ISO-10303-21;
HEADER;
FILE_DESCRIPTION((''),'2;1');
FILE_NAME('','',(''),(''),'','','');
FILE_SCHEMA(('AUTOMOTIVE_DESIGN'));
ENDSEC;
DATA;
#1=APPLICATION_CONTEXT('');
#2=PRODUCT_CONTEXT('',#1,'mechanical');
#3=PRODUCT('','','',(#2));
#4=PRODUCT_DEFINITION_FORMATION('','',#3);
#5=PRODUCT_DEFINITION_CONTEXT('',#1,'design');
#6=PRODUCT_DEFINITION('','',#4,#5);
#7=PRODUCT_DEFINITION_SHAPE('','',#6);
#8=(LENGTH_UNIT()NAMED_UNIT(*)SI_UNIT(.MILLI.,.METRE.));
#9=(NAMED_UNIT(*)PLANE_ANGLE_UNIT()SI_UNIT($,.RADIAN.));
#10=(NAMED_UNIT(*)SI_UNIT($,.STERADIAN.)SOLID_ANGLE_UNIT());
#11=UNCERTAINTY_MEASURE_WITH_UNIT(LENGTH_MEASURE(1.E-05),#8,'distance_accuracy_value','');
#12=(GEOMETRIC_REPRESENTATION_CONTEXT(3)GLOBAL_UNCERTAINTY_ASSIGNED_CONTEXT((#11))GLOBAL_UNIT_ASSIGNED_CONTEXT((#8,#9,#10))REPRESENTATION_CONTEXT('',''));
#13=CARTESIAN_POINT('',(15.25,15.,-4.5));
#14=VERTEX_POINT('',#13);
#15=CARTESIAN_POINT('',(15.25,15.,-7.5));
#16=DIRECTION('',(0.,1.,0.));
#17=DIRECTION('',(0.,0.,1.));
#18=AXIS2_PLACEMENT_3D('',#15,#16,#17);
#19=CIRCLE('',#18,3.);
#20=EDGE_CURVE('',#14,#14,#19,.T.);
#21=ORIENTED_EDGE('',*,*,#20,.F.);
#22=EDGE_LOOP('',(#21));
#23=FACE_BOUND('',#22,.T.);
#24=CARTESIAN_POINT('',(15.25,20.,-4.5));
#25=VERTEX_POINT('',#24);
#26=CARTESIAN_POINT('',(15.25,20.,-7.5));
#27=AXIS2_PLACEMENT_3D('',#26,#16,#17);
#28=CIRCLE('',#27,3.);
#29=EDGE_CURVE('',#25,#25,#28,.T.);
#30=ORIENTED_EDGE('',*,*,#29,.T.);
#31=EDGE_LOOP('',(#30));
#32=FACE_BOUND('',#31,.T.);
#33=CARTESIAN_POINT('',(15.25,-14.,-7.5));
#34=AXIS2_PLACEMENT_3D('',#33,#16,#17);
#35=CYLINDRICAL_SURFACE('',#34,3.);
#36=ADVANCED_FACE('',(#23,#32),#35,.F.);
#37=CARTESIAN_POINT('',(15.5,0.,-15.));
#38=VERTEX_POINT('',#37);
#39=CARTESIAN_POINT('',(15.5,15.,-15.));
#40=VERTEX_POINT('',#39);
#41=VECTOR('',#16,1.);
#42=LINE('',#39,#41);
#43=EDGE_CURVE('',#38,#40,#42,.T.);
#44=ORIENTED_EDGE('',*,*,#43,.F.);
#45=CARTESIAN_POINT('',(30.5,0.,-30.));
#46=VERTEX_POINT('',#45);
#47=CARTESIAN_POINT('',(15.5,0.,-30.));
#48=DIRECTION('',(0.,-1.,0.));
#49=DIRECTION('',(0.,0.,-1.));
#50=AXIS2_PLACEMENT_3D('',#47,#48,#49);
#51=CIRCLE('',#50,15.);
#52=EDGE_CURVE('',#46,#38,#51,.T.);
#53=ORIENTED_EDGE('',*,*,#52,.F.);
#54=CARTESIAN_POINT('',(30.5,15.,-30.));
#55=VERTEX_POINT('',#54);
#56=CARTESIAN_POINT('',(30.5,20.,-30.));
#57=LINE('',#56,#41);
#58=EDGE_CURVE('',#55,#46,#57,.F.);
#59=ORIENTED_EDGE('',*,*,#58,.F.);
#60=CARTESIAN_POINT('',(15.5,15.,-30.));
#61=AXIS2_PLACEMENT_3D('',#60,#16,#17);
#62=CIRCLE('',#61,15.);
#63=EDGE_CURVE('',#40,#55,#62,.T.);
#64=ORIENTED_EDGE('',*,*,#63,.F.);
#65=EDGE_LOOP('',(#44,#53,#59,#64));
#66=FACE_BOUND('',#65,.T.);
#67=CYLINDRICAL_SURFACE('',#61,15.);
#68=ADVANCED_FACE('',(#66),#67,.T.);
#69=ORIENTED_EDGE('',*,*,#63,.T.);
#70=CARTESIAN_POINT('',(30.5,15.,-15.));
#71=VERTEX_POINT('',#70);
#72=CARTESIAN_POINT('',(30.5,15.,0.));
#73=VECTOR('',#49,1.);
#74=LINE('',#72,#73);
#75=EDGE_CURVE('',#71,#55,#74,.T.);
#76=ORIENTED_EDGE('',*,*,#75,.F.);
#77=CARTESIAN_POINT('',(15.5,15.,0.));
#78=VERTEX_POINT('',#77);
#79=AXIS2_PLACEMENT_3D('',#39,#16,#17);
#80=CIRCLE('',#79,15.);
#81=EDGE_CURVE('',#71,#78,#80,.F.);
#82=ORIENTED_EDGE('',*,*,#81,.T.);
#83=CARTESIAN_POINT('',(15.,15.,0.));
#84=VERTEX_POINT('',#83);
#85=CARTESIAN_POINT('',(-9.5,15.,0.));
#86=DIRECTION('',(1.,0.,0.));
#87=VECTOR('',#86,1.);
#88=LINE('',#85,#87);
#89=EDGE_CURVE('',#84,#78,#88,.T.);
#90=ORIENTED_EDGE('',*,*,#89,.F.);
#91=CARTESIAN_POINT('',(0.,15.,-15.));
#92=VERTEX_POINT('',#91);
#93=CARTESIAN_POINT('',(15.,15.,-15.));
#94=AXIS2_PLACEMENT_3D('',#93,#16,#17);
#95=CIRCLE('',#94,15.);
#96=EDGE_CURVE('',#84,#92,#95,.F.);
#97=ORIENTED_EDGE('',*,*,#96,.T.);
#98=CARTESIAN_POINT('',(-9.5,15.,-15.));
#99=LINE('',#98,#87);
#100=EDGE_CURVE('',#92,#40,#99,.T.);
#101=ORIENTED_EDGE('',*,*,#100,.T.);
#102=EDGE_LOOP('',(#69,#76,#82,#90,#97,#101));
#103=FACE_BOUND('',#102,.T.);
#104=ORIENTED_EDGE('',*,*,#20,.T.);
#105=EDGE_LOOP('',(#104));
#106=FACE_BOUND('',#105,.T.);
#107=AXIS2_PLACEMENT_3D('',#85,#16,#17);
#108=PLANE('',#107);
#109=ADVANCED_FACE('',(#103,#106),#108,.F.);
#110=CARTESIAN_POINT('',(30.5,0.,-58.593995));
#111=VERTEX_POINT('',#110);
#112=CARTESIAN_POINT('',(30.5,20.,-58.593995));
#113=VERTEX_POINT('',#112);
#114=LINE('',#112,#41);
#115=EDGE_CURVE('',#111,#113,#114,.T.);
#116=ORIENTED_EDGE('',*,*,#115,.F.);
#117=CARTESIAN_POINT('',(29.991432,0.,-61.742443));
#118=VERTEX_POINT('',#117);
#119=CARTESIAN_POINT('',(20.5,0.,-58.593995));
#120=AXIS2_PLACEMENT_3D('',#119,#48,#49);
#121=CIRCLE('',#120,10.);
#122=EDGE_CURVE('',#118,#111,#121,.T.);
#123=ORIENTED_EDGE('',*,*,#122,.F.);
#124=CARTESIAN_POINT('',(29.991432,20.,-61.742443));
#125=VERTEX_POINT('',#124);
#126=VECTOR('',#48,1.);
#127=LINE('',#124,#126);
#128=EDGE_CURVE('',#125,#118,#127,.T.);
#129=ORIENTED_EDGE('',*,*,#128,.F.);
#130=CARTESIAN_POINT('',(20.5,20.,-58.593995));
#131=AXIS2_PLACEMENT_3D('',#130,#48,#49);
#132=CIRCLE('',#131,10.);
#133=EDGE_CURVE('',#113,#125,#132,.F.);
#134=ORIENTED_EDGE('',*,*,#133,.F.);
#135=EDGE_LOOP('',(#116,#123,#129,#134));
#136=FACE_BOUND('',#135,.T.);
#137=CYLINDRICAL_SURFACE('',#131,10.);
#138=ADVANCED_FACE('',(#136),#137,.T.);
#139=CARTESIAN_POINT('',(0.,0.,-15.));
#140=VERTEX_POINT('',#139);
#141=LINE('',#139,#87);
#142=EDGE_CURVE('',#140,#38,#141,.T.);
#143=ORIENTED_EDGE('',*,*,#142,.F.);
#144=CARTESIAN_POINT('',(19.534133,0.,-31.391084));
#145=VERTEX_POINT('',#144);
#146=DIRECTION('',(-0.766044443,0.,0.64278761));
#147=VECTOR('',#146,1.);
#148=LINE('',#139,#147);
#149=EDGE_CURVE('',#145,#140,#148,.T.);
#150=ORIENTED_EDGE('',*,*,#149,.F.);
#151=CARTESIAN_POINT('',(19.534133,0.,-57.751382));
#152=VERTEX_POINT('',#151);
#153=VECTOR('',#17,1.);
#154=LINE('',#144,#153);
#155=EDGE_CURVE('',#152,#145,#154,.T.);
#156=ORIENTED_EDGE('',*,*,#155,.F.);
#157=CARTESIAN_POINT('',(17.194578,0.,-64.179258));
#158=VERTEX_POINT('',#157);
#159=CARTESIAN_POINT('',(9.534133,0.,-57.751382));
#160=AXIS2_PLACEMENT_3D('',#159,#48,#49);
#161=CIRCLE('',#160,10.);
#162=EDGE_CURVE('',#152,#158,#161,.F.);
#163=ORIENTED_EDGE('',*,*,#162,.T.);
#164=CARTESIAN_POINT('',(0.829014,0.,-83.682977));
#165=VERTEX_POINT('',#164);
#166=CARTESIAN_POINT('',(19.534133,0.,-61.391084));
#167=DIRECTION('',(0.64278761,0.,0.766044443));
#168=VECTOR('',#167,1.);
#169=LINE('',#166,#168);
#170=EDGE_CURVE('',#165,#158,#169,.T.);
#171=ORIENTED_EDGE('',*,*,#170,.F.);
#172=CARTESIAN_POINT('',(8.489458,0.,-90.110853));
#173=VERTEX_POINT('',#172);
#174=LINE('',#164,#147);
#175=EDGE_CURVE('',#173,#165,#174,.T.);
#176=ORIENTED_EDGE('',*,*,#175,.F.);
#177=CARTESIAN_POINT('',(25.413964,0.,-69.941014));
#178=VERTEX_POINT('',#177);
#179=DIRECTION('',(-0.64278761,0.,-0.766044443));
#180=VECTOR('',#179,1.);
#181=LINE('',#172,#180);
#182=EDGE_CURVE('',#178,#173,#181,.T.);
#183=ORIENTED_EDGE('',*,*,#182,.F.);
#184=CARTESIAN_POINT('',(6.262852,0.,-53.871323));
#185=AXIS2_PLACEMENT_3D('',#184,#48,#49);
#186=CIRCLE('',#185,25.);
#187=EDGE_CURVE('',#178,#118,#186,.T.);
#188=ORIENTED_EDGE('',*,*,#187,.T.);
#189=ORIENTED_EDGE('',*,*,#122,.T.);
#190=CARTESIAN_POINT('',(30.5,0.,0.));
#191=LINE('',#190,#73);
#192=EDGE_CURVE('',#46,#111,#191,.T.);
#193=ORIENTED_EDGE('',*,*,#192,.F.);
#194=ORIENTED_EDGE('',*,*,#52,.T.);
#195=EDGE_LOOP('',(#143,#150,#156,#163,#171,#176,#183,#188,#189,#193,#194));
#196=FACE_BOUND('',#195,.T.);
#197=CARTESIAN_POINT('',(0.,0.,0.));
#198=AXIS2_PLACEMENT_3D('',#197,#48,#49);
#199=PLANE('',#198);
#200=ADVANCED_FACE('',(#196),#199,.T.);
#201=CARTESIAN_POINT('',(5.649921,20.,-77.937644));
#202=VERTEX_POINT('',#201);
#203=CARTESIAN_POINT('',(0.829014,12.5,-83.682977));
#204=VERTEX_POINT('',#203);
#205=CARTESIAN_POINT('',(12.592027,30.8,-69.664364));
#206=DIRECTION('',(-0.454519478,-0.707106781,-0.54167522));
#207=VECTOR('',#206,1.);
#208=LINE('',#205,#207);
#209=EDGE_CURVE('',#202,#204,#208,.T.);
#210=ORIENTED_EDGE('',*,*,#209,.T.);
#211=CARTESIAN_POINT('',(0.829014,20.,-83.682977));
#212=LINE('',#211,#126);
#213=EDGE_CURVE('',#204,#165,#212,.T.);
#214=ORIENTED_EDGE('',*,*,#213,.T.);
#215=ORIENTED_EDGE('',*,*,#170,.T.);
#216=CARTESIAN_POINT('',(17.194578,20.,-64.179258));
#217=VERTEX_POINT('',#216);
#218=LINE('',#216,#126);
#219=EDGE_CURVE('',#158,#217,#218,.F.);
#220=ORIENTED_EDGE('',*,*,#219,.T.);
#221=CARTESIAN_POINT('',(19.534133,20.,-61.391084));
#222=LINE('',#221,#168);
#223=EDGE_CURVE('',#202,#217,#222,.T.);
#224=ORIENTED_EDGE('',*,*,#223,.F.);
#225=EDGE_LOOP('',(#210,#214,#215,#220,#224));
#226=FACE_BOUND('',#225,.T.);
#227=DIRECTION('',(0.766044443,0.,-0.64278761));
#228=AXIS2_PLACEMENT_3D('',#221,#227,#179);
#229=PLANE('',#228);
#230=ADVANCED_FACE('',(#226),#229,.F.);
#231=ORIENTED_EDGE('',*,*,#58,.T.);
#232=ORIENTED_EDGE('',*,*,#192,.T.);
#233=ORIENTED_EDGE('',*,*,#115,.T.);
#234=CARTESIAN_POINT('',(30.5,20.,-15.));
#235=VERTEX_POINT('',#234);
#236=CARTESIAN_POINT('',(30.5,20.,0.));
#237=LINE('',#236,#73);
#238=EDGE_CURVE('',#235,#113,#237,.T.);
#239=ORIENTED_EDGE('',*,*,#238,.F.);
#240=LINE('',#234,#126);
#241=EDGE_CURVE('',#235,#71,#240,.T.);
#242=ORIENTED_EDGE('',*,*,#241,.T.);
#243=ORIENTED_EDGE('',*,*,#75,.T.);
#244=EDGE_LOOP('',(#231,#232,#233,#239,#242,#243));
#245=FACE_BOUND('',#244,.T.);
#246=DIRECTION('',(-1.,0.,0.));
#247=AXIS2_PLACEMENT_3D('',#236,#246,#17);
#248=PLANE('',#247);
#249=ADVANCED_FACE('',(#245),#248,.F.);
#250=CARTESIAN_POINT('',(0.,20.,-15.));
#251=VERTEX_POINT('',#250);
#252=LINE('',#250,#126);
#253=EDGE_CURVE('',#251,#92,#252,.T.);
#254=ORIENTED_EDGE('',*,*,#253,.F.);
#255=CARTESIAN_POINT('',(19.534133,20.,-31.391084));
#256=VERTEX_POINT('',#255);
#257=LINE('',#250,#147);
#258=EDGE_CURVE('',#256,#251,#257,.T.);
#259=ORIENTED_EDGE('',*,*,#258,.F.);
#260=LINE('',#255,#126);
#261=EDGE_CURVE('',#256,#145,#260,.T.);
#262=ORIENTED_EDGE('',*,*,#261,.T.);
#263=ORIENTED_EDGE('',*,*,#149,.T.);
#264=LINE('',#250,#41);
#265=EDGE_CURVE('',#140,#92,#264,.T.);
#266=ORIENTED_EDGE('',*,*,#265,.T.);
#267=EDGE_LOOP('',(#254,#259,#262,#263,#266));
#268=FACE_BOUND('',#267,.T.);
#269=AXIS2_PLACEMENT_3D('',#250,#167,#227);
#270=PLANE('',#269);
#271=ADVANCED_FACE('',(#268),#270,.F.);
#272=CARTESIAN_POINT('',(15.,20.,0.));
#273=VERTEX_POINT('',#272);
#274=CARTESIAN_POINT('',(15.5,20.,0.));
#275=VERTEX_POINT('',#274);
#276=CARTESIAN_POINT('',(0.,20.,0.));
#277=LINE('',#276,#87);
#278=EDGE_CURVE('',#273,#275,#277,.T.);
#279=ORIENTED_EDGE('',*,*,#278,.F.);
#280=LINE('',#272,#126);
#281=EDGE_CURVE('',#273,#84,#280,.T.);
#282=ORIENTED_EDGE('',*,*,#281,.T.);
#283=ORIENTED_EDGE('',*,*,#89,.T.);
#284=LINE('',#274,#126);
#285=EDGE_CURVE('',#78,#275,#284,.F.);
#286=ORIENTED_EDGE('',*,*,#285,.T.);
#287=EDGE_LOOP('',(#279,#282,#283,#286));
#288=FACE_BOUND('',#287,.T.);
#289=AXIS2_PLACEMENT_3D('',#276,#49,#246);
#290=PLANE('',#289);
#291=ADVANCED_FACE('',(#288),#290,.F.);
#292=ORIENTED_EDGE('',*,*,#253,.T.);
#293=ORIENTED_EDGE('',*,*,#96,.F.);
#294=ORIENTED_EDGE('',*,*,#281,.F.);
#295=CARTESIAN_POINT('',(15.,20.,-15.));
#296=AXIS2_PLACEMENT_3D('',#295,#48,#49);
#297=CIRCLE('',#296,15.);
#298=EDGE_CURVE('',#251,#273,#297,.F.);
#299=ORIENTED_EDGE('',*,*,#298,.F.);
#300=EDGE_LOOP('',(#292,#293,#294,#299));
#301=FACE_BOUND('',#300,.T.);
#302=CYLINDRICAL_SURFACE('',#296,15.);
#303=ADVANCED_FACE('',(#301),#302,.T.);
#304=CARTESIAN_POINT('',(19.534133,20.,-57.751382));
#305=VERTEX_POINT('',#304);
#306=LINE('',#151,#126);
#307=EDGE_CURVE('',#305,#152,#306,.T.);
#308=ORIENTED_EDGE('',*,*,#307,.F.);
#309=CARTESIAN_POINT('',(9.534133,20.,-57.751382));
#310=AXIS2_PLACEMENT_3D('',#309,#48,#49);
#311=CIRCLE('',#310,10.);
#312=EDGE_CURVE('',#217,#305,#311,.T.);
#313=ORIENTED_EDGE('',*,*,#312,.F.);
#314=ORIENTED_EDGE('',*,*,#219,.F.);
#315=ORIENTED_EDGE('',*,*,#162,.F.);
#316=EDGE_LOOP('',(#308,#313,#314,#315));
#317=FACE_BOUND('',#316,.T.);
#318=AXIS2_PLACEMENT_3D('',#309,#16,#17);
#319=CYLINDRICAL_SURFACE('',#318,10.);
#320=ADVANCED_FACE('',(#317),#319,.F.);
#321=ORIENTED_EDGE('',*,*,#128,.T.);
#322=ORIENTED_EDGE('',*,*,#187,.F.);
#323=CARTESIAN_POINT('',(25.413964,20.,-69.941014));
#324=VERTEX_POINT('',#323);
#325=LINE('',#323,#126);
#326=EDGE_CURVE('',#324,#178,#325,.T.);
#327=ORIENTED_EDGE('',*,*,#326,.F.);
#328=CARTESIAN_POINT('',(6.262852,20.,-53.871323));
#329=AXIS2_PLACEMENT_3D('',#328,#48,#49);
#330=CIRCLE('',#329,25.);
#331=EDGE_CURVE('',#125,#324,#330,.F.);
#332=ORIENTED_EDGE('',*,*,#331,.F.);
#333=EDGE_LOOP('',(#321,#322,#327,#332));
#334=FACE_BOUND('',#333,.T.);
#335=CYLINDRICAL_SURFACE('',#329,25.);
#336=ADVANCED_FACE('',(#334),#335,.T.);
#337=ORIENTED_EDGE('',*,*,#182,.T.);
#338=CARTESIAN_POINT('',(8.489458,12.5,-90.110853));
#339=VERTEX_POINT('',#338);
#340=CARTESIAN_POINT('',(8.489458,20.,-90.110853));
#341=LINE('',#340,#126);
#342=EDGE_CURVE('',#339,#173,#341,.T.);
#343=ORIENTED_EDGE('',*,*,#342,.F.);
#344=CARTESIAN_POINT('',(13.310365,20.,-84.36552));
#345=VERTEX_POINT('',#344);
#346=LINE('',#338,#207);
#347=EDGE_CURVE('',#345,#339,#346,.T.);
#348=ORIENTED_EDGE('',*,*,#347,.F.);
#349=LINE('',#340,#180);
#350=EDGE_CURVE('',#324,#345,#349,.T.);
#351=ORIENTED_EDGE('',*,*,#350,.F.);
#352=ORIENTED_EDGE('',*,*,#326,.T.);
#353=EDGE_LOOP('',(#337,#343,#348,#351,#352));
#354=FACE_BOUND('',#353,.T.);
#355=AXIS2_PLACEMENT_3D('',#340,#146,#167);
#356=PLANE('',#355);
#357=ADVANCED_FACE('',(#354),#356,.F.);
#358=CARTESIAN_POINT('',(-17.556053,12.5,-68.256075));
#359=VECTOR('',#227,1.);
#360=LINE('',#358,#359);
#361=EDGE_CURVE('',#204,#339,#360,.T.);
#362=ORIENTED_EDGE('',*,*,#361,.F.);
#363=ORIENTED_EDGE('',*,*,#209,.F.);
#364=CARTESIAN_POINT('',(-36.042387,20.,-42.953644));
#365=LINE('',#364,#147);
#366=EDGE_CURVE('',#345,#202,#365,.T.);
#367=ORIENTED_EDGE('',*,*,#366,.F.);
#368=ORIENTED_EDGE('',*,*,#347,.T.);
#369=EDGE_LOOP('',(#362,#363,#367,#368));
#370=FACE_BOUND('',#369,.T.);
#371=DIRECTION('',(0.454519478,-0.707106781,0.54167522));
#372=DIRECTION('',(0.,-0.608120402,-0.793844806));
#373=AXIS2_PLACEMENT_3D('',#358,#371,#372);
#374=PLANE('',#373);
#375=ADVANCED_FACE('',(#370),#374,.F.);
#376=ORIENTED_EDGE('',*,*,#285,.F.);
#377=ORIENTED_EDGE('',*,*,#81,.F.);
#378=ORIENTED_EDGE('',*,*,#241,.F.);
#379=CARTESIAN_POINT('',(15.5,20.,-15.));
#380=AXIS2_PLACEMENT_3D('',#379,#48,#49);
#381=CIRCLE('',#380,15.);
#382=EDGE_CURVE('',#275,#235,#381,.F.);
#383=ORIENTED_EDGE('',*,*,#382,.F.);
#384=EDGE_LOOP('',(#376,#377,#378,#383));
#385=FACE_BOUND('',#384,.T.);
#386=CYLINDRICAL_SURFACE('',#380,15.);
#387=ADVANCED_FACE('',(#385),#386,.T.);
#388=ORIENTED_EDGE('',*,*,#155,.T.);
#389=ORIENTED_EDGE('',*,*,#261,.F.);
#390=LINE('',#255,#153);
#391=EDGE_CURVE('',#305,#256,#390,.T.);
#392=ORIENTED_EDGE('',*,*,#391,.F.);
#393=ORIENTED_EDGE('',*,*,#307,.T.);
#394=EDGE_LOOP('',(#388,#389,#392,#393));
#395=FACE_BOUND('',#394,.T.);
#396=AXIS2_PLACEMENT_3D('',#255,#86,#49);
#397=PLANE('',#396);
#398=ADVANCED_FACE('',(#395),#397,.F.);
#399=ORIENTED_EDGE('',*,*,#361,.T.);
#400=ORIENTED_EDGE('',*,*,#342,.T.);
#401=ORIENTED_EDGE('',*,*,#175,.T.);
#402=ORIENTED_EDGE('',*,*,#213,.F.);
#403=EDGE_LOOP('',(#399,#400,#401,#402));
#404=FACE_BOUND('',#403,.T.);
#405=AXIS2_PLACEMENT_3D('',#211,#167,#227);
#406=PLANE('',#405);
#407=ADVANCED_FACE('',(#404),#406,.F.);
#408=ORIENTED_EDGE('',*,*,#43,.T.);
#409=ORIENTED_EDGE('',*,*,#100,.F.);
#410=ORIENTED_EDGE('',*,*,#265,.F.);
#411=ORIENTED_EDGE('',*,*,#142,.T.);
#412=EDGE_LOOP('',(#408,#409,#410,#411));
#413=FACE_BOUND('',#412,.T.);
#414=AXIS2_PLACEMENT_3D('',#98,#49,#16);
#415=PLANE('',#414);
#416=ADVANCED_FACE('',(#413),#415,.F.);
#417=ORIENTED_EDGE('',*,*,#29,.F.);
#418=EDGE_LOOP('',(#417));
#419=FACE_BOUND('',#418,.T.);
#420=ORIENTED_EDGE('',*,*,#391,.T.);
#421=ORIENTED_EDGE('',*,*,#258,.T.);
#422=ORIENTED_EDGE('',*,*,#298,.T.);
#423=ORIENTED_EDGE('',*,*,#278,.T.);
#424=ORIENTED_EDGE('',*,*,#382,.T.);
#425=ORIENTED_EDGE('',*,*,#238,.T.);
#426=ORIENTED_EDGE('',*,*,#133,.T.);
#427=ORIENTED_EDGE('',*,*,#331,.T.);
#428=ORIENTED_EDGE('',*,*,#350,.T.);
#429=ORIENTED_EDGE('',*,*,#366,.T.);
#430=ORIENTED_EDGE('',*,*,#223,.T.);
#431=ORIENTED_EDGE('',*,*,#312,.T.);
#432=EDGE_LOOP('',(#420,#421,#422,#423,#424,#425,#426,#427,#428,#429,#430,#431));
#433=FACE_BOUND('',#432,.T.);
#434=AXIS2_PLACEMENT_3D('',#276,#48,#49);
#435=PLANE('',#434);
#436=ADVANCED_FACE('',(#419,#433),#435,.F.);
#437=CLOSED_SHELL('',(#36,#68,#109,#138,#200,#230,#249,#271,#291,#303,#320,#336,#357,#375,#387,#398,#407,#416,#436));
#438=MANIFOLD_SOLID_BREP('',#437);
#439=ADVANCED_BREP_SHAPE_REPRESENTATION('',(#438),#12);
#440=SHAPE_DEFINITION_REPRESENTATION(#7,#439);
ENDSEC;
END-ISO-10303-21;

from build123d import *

# Parameters (mm, degrees)
BOSS_EXTRUDE1_DEPTH = 20
SKETCH5_W           = 15
SKETCH5_H           = 15
CUT_EXTRUDE1_DEPTH  = 40
SKETCH6_R           = 3
CUT_EXTRUDE2_DEPTH  = 34
FILLET1_R           = 15
FILLET2_R           = 15
FILLET3_R           = 25
FILLET4_R           = 10
CUT_EXTRUDE3_DEPTH  = 34
FILLET5_R           = 10


# Some blends are built 0.0001 mm under size
with BuildPart() as part:
    # Sketch3 → Boss-Extrude1 (new body)
    with BuildSketch(Plane(origin=(0, 0, 0), x_dir=(1, 0, 0), z_dir=(0, 1, 0))):
        Polygon((0, 0), (30.5, 0), (30.5, 60), (29.894285691, 64.601573483), (8.489458289, 90.110853439), (0.829013858, 83.682977342), (19.5341333, 61.391084047), (19.5341333, 31.391084047), (0, 15), align=None)
    extrude(amount=BOSS_EXTRUDE1_DEPTH)

    # Sketch5 → Cut-Extrude1 (cut)
    with BuildSketch(Plane(origin=(30.5, 0, 0), x_dir=(0, 0, -1), z_dir=(1, 0, 0))):
        with Locations((7.5, 7.5)):
            Rectangle(SKETCH5_W, SKETCH5_H)
    extrude(amount=-CUT_EXTRUDE1_DEPTH, mode=Mode.SUBTRACT)

    # Sketch6 → Cut-Extrude2 (cut)
    with BuildSketch(Plane(origin=(0, 20, 0), x_dir=(1, 0, 0), z_dir=(0, 1, 0))):
        with Locations(Location((15.25, 7.5, 0), (0, 0, 270))):
            Circle(SKETCH6_R)
    extrude(amount=-CUT_EXTRUDE2_DEPTH, mode=Mode.SUBTRACT)

    # Fillet1
    fillet1_edges = [part.edges().sort_by_distance(p)[0] for p in [
        (0, 17.5, 0),
        (30.5, 17.5, 0),
    ]]
    fillet(fillet1_edges, radius=FILLET1_R - 0.0001)  # a hair under: the kernel refuses the full size

    # Fillet2
    fillet2_edges = [part.edges().sort_by_distance(p)[0] for p in [
        (30.5, 7.5, -15),
    ]]
    fillet(fillet2_edges, radius=FILLET2_R)

    # Fillet3
    # the kernel refuses this fillet: 25 mm, written as the material it takes off along each edge
    with BuildSketch(Plane(origin=(29.894285691, -17.425359882, -64.601573483), x_dir=(-0.64278760968654, 0, -0.7660444431189775), z_dir=(0, 1, 0))) as fillet3_piece_1:
        with BuildLine():
            CenterArc((6.970143953, 25), FILLET3_R, 244.190525193, 25.809474807)
            Line((-3.914355449, 2.49383034), (-4.132045437, 2.043706946))
            ThreePointArc((-4.132045437, 2.043706946), (-2.225836026, 0.825224861), (-0.268658302, -0.421690309))
            Line((-0.268658302, -0.421690309), (0, -0.5))
            Line((0, -0.5), (6.970143953, -0.5))
            Line((6.970143953, -0.5), (6.970143953, 0))
        make_face()
    extrude(amount=54.850719763, mode=Mode.SUBTRACT)

    # Fillet4
    fillet4_edges = [part.edges().sort_by_distance(p)[0] for p in [
        (19.5341333, 10, -61.391084047),
    ]]
    fillet(fillet4_edges, radius=FILLET4_R)

    # Sketch7 → Cut-Extrude3 (cut)
    with BuildSketch(Plane(origin=(49.352752173, 0, -41.411876146), x_dir=(-0.6427876096865405, 0, -0.7660444431189772), z_dir=(0.7660444431189772, 0, -0.6427876096865404))):
        Polygon((56.07199994, 20), (63.57199994, 20), (63.57199994, 12.5), align=None)
    extrude(amount=-CUT_EXTRUDE3_DEPTH, mode=Mode.SUBTRACT)

    # Fillet5
    fillet5_edges = [part.edges().sort_by_distance(p)[0] for p in [
        (30.5, 10, -60),
    ]]
    fillet(fillet5_edges, radius=FILLET5_R)


solid = part.part
